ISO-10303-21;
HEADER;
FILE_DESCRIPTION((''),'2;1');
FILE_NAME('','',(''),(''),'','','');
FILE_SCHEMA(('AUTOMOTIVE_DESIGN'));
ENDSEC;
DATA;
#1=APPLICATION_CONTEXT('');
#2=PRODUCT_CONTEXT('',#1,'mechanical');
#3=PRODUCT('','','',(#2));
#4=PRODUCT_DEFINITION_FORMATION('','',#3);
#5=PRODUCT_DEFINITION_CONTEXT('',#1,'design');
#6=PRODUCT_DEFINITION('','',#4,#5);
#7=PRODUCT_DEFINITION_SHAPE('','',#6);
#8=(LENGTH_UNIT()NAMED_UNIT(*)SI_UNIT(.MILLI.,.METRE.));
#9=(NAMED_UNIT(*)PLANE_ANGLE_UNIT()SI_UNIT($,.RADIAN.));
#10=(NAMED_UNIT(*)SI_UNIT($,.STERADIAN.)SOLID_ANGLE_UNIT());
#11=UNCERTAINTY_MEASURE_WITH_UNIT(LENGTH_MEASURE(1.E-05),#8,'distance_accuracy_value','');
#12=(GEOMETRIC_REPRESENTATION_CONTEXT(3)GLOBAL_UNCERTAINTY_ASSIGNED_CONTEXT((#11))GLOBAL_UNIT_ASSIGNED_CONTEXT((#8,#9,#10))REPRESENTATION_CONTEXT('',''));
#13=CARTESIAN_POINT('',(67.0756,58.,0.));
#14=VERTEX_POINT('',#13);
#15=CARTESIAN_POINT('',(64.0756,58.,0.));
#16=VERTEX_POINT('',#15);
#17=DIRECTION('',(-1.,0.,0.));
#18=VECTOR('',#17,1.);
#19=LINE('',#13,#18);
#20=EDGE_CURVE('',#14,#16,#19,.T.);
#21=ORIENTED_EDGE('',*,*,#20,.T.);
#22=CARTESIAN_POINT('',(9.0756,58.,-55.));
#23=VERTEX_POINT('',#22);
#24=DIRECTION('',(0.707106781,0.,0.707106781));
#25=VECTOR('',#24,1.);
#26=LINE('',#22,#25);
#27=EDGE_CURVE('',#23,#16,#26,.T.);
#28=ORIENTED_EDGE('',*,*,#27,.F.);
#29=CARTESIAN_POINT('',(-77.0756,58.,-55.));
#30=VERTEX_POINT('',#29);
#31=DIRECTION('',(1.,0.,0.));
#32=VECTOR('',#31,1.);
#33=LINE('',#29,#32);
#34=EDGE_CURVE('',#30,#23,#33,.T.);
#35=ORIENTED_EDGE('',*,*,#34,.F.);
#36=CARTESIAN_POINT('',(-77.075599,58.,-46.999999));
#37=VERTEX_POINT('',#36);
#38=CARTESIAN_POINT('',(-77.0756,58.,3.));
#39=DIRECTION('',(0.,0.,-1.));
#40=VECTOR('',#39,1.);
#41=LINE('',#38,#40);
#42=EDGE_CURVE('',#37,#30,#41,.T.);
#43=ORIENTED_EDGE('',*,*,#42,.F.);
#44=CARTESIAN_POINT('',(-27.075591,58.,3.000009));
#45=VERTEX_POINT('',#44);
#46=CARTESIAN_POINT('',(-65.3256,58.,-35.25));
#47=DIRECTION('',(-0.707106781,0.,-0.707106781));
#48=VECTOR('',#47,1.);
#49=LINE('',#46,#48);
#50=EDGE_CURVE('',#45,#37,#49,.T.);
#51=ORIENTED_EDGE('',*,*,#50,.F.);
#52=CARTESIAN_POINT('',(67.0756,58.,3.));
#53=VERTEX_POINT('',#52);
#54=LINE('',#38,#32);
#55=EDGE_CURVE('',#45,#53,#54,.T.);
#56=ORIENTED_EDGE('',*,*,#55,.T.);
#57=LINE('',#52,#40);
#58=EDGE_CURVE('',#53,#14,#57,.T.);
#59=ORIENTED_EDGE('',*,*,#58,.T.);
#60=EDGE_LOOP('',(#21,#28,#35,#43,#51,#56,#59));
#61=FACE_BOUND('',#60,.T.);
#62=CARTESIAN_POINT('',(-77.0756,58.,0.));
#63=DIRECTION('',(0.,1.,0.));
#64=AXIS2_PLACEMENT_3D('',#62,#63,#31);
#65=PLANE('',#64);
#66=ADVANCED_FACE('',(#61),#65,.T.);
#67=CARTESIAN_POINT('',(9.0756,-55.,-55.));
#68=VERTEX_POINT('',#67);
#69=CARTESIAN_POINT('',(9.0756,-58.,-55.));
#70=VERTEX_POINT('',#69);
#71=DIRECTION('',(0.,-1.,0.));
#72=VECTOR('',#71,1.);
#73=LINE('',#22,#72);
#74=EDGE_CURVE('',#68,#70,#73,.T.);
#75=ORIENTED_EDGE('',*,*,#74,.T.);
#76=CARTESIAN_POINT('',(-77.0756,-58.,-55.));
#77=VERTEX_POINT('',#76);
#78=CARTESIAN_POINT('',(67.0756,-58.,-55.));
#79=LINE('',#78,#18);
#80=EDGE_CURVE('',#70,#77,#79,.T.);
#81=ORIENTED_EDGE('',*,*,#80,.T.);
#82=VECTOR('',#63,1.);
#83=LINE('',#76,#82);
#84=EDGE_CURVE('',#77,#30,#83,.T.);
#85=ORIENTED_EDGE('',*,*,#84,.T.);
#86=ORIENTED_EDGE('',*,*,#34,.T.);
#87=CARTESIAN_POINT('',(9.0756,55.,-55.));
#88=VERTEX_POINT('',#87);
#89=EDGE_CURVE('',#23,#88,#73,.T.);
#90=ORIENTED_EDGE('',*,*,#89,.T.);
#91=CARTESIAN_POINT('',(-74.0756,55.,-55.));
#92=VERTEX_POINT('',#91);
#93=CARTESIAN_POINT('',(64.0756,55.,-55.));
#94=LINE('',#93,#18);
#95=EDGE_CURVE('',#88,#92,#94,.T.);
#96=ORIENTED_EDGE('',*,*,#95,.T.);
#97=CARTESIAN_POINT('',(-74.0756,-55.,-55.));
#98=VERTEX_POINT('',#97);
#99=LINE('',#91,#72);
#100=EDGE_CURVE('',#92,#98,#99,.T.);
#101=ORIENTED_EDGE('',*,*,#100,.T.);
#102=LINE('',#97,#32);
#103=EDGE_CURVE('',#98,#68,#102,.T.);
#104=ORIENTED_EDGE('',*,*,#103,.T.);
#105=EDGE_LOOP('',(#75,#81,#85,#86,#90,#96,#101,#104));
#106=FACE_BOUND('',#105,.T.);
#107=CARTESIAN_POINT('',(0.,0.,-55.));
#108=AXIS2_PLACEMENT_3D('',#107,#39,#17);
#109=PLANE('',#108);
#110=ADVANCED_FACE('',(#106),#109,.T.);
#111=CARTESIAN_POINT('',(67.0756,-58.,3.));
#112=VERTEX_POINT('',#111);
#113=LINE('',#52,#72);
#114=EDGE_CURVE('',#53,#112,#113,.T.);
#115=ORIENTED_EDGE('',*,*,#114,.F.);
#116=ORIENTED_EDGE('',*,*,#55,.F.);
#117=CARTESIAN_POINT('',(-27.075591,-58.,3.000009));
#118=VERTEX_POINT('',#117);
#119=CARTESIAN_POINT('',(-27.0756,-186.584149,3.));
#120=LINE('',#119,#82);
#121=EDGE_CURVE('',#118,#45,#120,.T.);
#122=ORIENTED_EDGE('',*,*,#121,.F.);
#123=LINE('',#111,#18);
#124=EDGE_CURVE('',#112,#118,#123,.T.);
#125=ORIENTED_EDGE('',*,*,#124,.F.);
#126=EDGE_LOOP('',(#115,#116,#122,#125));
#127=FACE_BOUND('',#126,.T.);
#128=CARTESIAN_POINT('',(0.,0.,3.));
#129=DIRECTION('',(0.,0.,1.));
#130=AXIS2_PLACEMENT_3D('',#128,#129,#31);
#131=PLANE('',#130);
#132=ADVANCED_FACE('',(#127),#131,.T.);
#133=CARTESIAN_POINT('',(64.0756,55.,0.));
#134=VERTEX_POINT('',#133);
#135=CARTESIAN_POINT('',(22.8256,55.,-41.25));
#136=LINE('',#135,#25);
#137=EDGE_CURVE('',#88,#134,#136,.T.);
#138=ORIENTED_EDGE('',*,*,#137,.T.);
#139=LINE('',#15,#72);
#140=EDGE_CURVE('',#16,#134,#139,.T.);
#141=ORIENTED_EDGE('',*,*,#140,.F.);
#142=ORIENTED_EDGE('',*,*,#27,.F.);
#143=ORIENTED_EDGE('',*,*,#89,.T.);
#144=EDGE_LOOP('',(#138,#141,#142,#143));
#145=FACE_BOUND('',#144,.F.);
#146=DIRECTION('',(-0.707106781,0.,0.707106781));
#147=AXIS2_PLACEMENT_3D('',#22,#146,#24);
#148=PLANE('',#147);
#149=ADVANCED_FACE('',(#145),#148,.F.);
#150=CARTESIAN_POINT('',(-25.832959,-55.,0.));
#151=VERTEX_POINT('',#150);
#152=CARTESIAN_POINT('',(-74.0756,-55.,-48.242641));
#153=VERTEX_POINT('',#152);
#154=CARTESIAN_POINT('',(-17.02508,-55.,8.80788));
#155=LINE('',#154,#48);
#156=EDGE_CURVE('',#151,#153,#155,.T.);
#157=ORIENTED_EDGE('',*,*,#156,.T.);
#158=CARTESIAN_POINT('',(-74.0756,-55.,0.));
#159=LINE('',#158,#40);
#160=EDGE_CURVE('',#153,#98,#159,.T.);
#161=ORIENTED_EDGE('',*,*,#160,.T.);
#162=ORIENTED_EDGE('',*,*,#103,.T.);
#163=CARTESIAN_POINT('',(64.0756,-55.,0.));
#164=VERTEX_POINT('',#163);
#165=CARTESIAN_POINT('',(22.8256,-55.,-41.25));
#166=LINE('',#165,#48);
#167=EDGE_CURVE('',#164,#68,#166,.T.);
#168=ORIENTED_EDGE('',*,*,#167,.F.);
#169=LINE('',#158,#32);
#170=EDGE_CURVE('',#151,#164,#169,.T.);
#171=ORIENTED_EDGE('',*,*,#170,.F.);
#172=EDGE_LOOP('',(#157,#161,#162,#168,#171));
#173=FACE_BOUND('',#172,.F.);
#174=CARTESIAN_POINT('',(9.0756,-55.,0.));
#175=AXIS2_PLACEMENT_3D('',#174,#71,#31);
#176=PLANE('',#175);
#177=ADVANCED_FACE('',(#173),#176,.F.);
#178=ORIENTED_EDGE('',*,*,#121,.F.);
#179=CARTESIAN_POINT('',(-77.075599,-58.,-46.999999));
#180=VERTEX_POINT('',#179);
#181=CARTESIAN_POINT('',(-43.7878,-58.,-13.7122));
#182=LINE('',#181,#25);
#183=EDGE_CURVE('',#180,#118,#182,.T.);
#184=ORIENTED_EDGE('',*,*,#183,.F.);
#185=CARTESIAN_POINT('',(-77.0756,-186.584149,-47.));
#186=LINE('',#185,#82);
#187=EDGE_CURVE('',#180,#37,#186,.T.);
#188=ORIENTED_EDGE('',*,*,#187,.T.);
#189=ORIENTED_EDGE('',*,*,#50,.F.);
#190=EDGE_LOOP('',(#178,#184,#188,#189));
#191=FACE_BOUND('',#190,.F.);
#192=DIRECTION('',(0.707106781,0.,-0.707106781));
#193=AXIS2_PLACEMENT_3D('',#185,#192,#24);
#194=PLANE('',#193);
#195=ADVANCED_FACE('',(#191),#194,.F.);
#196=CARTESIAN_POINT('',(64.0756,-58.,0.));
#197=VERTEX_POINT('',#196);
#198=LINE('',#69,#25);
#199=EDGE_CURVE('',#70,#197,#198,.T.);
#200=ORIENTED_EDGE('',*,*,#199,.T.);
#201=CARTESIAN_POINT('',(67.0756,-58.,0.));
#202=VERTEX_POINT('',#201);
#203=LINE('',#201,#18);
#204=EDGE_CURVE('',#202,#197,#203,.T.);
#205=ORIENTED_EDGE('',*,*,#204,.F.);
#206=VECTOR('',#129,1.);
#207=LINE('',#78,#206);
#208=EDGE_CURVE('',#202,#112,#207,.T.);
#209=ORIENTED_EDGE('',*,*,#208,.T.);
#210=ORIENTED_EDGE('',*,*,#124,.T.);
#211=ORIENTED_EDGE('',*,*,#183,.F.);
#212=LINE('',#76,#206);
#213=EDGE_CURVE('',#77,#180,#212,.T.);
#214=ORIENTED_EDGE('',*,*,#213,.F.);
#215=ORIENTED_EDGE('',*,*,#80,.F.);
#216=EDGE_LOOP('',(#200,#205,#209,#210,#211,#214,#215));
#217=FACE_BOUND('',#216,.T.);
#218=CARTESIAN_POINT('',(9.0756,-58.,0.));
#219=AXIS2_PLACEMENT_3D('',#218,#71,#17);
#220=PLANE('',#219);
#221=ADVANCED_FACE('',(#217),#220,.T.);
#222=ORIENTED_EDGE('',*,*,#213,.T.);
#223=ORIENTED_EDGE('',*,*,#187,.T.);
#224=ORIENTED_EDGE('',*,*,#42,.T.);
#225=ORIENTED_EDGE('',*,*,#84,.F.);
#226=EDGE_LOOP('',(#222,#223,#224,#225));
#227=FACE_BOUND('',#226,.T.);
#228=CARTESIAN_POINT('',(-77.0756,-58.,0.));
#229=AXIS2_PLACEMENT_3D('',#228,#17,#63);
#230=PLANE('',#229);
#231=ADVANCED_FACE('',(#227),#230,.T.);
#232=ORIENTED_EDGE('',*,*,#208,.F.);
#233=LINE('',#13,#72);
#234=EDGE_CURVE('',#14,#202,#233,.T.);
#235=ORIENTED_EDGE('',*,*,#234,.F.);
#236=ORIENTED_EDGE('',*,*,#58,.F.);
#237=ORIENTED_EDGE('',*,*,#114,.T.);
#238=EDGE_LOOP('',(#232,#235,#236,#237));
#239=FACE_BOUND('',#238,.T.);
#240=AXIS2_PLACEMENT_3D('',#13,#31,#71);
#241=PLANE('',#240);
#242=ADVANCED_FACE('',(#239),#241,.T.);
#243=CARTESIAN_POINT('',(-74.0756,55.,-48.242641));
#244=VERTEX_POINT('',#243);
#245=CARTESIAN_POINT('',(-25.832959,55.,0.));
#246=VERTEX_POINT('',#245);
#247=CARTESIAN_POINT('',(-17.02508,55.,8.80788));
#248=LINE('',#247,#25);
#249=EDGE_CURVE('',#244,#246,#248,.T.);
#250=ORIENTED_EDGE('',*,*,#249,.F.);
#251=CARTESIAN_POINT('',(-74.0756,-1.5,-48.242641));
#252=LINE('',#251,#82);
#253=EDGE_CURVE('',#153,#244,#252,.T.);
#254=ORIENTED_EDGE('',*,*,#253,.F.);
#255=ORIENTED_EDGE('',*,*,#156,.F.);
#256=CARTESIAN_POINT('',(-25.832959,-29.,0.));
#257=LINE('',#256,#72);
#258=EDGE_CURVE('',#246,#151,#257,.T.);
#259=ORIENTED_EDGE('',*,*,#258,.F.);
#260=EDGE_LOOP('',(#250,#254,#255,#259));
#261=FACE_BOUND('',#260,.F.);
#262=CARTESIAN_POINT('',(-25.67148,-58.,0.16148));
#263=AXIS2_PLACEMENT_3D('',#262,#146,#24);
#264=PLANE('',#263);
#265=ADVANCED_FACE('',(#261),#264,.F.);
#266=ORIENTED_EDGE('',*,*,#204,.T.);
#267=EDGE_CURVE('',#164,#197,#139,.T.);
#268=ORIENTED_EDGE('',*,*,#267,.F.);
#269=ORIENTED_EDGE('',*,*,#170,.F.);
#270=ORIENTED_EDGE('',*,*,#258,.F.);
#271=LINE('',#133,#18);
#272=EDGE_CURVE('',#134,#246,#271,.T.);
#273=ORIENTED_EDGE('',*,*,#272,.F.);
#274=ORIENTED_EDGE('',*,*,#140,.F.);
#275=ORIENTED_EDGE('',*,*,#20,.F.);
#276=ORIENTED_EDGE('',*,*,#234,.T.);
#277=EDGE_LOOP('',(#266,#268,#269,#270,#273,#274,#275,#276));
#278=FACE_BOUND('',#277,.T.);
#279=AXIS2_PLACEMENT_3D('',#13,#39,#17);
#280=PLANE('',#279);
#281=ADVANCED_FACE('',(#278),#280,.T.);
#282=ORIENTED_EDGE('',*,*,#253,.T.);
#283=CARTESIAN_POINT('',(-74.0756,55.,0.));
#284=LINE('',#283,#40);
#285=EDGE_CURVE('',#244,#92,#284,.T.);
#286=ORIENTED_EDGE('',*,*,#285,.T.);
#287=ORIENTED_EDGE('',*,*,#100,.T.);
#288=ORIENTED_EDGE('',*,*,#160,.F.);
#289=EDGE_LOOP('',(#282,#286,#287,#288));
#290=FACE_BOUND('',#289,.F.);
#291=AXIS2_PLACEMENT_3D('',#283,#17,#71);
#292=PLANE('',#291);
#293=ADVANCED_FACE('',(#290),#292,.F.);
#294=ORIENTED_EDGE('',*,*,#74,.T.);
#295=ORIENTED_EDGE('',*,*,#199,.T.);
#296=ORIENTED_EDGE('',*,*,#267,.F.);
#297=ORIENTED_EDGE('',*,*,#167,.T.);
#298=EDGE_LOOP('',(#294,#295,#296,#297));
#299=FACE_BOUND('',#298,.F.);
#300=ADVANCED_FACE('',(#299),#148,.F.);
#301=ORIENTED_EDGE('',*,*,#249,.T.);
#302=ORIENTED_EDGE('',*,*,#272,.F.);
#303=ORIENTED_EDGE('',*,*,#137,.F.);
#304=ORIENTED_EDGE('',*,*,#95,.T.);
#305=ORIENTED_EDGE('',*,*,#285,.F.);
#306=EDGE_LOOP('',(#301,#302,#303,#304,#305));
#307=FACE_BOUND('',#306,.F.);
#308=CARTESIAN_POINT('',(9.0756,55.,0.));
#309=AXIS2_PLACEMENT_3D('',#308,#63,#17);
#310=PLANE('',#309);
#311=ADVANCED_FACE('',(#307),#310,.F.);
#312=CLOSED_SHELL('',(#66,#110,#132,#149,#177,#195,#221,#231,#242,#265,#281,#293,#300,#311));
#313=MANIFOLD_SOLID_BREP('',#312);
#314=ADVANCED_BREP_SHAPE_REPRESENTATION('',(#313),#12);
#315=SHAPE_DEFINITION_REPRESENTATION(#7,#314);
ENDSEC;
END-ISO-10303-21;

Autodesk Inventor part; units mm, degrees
ref_plane "YZ Plane" through (0, 0, 0) normal (1, 0, 0) x (0, 1, 0)
ref_plane "XZ Plane" through (0, 0, 0) normal (0, 1, 0) x (-1, 0, 0)
sketch "Эскиз1" plane through (0, 0, 0) normal (0, 0, 1) x (1, 0, 0)
  line L0 (-77.0756, -58) -> (-77.0756, 58) projected
  line L1 (-77.0756, 58) -> (67.0756, 58) projected
  line L2 (67.0756, 58) -> (67.0756, -58) projected
  line L3 (67.0756, -58) -> (-77.0756, -58) projected
  line L4 (-77.0756, -58) -> (-77.0756, 58) projected
  line L5 (9.0756, -58) -> (-77.0756, -58) projected
  line L6 (-77.0756, 58) -> (9.0756, 58) projected
  point P0 (0, 0)
extrude "Выдавливание1" add sketch "Эскиз1" along normal blind 3
sketch "Эскиз2" plane through (0, 0, 0) normal (0, 0, -1) x (-1, 0, 0)
  line L0 (-64.0756, 55) -> (74.0756, 55) projected
  line L1 (74.0756, 55) -> (74.0756, -55) projected
  line L2 (74.0756, -55) -> (-64.0756, -55) projected
  line L3 (-64.0756, -55) -> (-64.0756, 55) projected
  line L4 (77.0756, -58) -> (77.0756, 58) projected
  line L5 (77.0756, 58) -> (-67.0756, 58) projected
  line L6 (-67.0756, 58) -> (-67.0756, -58) projected
  line L7 (-67.0756, -58) -> (77.0756, -58) projected
  line L8 (-67.0756, -58) -> (-67.0756, 58) projected
  line L9 (-67.0756, 58) -> (77.0756, 58) projected
  line L10 (77.0756, 58) -> (77.0756, -58) projected
  line L11 (77.0756, -58) -> (-67.0756, -58) projected
  line L12 (-9.0756, 55) -> (74.0756, 55)
  line L13 (74.0756, 55) -> (74.0756, -55)
  line L14 (74.0756, -55) -> (-9.0756, -55)
  point P0 (0, 0)
  point P1 (68.51, 55)
  point P2 (68.51, -55)
ref_plane "РабПлоскость1" through (-68.51, -58, -55) normal (0, 0, 1) x (1, 0, 0)
extrude "Выдавливание2" add sketch "Эскиз2" along normal up to surface (55 mm away)
chamfer "Фаска1" distance 50 angle 45 1 edges at (-77.0756, 0, 3)
sketch "Эскиз4" plane through (-27.7928, -58, 2.2828) normal (-0.7071068, 0, 0.7071068) x (0.7071068, 0, 0.7071068)
  line L0 (-3.2284, 3) -> (-65.4538, 3) projected
  line L1 (-65.4538, 3) -> (-65.4538, 113) projected
  line L2 (-65.4538, 113) -> (-3.2284, 113) projected
  line L3 (-3.2284, 113) -> (-3.2284, 3) projected
  line L4 (-69.6964, 0) -> (1.0143, 0) projected
  line L5 (1.0143, 0) -> (1.0143, 116) projected
  line L6 (1.0143, 116) -> (-69.6964, 116) projected
  line L7 (-69.6964, 116) -> (-69.6964, 0) projected
  point P0 (18.0383, 58)
extrude "Выдавливание4" add sketch "Эскиз4" against normal blind 3 contours L0 L1 L2 L3 | L7 L6 L5 L4
sketch "Эскиз9" plane through (-28.51, -58, 3) normal (-0.7071068, 0, 0.7071068) x (0.7071068, 0, 0.7071068)
  line L0 (-10, 105.175) -> (-30, 105.175)
  line L1 (-30, 105.175) -> (-30, 91.875)
  line L2 (-30, 91.875) -> (-10, 91.875)
  line L3 (-10, 91.875) -> (-10, 105.175)
  circle A0 centre (-43.2843, 98.525) radius 5.25
  line L4 (-7, 80.55) -> (-33, 80.55)
  line L5 (-33, 80.55) -> (-33, 35.45)
  line L6 (-33, 35.45) -> (-7, 35.45)
  line L7 (-7, 35.45) -> (-7, 80.55)
  line L8 (-33.5, 34.95) -> (-33.5, 81.05)
  line L9 (-33.5, 81.05) -> (-6.5, 81.05)
  line L10 (-6.5, 81.05) -> (-6.5, 34.95)
  line L11 (-6.5, 34.95) -> (-33.5, 34.95)
  line L12 (-6.5, 70.5) -> (-33.5, 70.5)
  line L13 (-33.5, 70.5) -> (-33.5, 45.5)
  line L14 (-33.5, 45.5) -> (-6.5, 45.5)
  line L15 (-6.5, 45.5) -> (-6.5, 70.5)
  line L16 (-6.5, 70.5) -> (-6, 70.5)
  line L17 (-6, 70.5) -> (-6, 45.5)
  line L18 (-6, 45.5) -> (-6.5, 45.5)
  line L19 (-6.5, 45.5) -> (-6.5, 70.5)
  line L20 (-33.5, 70.5) -> (-34, 70.5)
  line L21 (-34, 70.5) -> (-34, 45.5)
  line L22 (-34, 45.5) -> (-33.5, 45.5)
  line L23 (-33.5, 45.5) -> (-33.5, 70.5)
  line L24 (0, 0) -> (0, 116) projected
  line L25 (0, 116) -> (0, 0)
  line L26 (0, 0) -> (0, 58)
  line L27 (0, 58) -> (-56.5685, 58)
  line L28 (-56.5685, 116) -> (-56.5685, 0) projected
  circle A1 centre (-15.7843, 17.475) radius 3.65
  circle A2 centre (-40.7843, 17.475) radius 3.65
  line L29 (-6.5, 34.95) -> (-6.5, 0)
  line L30 (-56.5685, 0) -> (0, 0) projected
  line L31 (-6.5, 17.475) -> (-56.5685, 17.475)
  line L32 (-56.5685, 17.475) -> (0, 17.475)
  line L33 (-15.7843, 17.475) -> (-40.7843, 17.475)
  circle A3 centre (-45.0343, 73.55) radius 4.15
  line L34 (-56.5685, 81.05) -> (-33.5, 81.05)
  line L35 (-33.5, 81.05) -> (-33.5, 34.95)
  line L36 (-33.5, 34.95) -> (-56.5685, 34.95)
  line L37 (-56.5685, 34.95) -> (-56.5685, 81.05)
  line L38 (-45.0343, 81.05) -> (-45.0343, 34.95)
  circle A4 centre (-45.0343, 73.55) radius 7.5
  line L39 (-6.5, 81.05) -> (-6.5, 116)
  line L40 (-6.5, 98.525) -> (-56.5685, 98.525)
  line L41 (-56.5685, 98.525) -> (0, 98.525)
  line L42 (-30, 98.525) -> (-56.5685, 98.525)
  line L43 (-20, 91.875) -> (-20, 0)
  point P0 (18.0383, 58)
  point P1 (-6.5, 58)
  point P2 (-6.5, 58)
  point P3 (-28.2843, 17.475)
  point P4 (-10, 98.525)
  point P5 (-20, 81.05)
  dimension "d31" = 20
  dimension "d32" = 13.3
  dimension "d33" = 10.5
  dimension "d34" = 26
  dimension "d35" = 45.1
  dimension "d36" = 0.5
  dimension "d37" = 25
  dimension "d38" = 0.5
  dimension "d39" = 0.5
  dimension "d40" = 7.3
  dimension "d41" = 7.3
  dimension "d45" = 25
  dimension "d46" = 8.3
  dimension "d47" = 15
  dimension "d48" = 10
sketch "Эскиз10" plane through (-28.51, -58, 3) normal (-0.7071068, 0, 0.7071068) x (0.7071068, 0, 0.7071068)
  line L0 (-30, 105.175) -> (-30, 91.875) projected
  line L1 (-10, 105.175) -> (-30, 105.175) projected
  line L2 (-30, 91.875) -> (-10, 91.875) projected
  line L3 (-10, 91.875) -> (-10, 105.175) projected
  circle A0 centre (-43.2843, 98.525) radius 5.25 projected
  circle A1 centre (-45.0343, 73.55) radius 4.15 projected
  circle A2 centre (-40.7843, 17.475) radius 3.65 projected
  circle A3 centre (-15.7843, 17.475) radius 3.65 projected
  line L4 (-6.5, 34.95) -> (-33.5, 34.95) projected
  line L5 (-33.5, 34.95) -> (-33.5, 81.05) projected
  line L6 (-34, 70.5) -> (-34, 45.5) projected
  line L7 (-33.5, 81.05) -> (-6.5, 81.05) projected
  line L8 (-6.5, 81.05) -> (-6.5, 34.95) projected
  line L9 (-6.5, 70.5) -> (-6, 70.5) projected
  line L10 (-6, 70.5) -> (-6, 45.5) projected
  line L11 (-6, 45.5) -> (-6.5, 45.5) projected
  line L12 (-33.5, 70.5) -> (-34, 70.5) projected
  line L13 (-34, 45.5) -> (-33.5, 45.5) projected
  line L14 (-6.15, 69.35) -> (-6.15, 60.2) projected
  point P0 (18.0383, 58)
extrude "Выдавливание9" [suppressed]
sketch "Эскиз11" plane through (-25.6715, -58, 0.1615) normal (0.7071068, 0, -0.7071068) x (-0.7071068, 0, -0.7071068)
  line L0 (0.2284, 3) -> (0.2284, 113) projected
  line L1 (40.7843, 17.475) -> (40.7843, 25.8116)
  line L2 (38.9594, 25.1915) -> (38.9372, 24.9384) projected
  arc A0 (38.8018, 24.8228) -> (38.9372, 24.9384) centre (38.8107, 24.9495) ccw projected
  arc A1 (38.8018, 24.8228) -> (37.7667, 24.8228) centre (38.2843, 17.475) ccw projected
  arc A2 (38.9594, 25.1915) -> (38.8419, 25.3292) centre (38.8329, 25.2026) ccw projected
  arc A3 (37.6313, 24.9384) -> (37.7667, 24.8228) centre (37.7578, 24.9495) ccw projected
  line L3 (37.6092, 25.1915) -> (37.6313, 24.9384) projected
  arc A4 (37.7267, 25.3292) -> (37.6092, 25.1915) centre (37.7357, 25.2026) ccw projected
  arc A5 (39.3003, 25.2832) -> (37.2683, 25.2832) centre (38.2843, 17.475) ccw projected
  arc A6 (40.1771, 26.0275) -> (39.4118, 25.1305) centre (40.2357, 25.2026) ccw
  line L4 (39.4118, 25.1305) -> (39.434, 24.8774)
  arc A7 (39.434, 24.8774) -> (40.3159, 24.1245) centre (40.2578, 24.9495) ccw
  arc A8 (41.2526, 24.1245) -> (40.3159, 24.1245) centre (40.7843, 17.475) ccw
  arc A9 (41.2526, 24.1245) -> (42.1346, 24.8774) centre (41.3107, 24.9495) ccw
  line L5 (42.1346, 24.8774) -> (42.1567, 25.1305)
  arc A10 (42.1567, 25.1305) -> (41.3914, 26.0275) centre (41.3329, 25.2026) ccw
  circle A11 centre (40.7843, 17.475) radius 8.574
  arc A12 (-9.3529, 50.5788) -> (-10.2349, 51.3317) centre (-10.1768, 50.5067) ccw
  arc A13 (-11.1715, 51.3317) -> (-10.2349, 51.3317) centre (-10.7032, 57.9812) ccw
  arc A14 (-11.1715, 51.3317) -> (-12.0535, 50.5788) centre (-11.2297, 50.5067) ccw
  arc A15 (-12.0756, 50.3258) -> (-11.3104, 49.4288) centre (-11.2518, 50.2537) ccw
  arc A16 (-10.0961, 49.4288) -> (-9.3308, 50.3258) centre (-10.1546, 50.2537) ccw
  line L6 (-9.3308, 50.3258) -> (-9.3529, 50.5788)
  line L7 (-12.0535, 50.5788) -> (-12.0756, 50.3258)
  circle A17 centre (15.7843, 17.475) radius 8.574
  arc A18 (14.4118, 9.8195) -> (15.1771, 8.9225) centre (15.2357, 9.7474) ccw
  arc A19 (15.3159, 10.8255) -> (14.434, 10.0726) centre (15.2578, 10.0005) ccw
  line L8 (14.434, 10.0726) -> (14.4118, 9.8195)
  arc A20 (15.3159, 10.8255) -> (16.2526, 10.8255) centre (15.7843, 17.475) ccw
  arc A21 (17.1346, 10.0726) -> (16.2526, 10.8255) centre (16.3107, 10.0005) ccw
  arc A22 (16.3914, 8.9225) -> (17.1567, 9.8195) centre (16.3329, 9.7474) ccw
  line L9 (17.1567, 9.8195) -> (17.1346, 10.0726)
  line L10 (0.2284, 113) -> (68.4538, 113) projected
  line L11 (68.4538, 3) -> (0.2284, 3) projected
  line L12 (68.4538, 113) -> (68.4538, 3) projected
  point P0 (-18.0383, 58)
  point P1 (40.1771, 26.0275)
  point P2 (15.1771, 8.9225)
  point P3 (16.3914, 8.9225)
  point P4 (15.1771, 8.9225)
  point P5 (16.3914, 8.9225)
  point P6 (17.1346, 10.0726)
extrude "Выдавливание10" [suppressed]
sketch "Эскиз14" plane through (-65.51, -55, -55) normal (1, 0, 0) x (0, 0, -1)
  line L0 (-55, 0) -> (-55, 110) projected
  line L1 (-24.0346, 70.55) -> (-16.7574, 70.55)
  line L2 (-16.7574, 110) -> (-16.7574, 0) projected
  line L3 (-18.0074, 65.55) -> (-15.5074, 65.55)
  line L4 (-15.5074, 65.55) -> (-15.5074, 75.55)
  line L5 (-15.5074, 75.55) -> (-18.0074, 75.55)
  line L6 (-18.0074, 75.55) -> (-18.0074, 65.55)
  line L7 (-18.0074, 65.55) -> (-15.5074, 75.55) construction
  line L8 (-15.5074, 65.55) -> (-18.0074, 75.55) construction
  line L9 (-55, 110) -> (-6.7574, 110) projected
  line L10 (-6.7574, 0) -> (-55, 0) projected
  line L11 (-6.7574, 110) -> (-6.7574, 0) projected
  point P0 (-55, 55)
  dimension "d63" = 2.5
  dimension "d64" = 10
extrude "Выдавливание13" [suppressed]
ref_plane "РабПлоскость2" through (-65.51, 15.55, -39.4926) normal (0, -1, 0) x (1, 0, 0)
sketch "Эскиз15" plane through (-77.0756, 58, -55) normal (0, 1, 0) x (1, 0, 0)
  line L0 (86.1512, 0) -> (141.1512, -55) projected
  line L1 (144.1512, -55) -> (141.1512, -55) projected
  line L2 (0, 0) -> (86.1512, 0) projected
  line L3 (50, -58) -> (0, -8) projected
  line L4 (144.1512, -58) -> (50, -58) projected
  line L5 (144.1512, 0) -> (144.1512, -58) projected
  line L6 (0, 0) -> (144.1512, 0) projected
  line L7 (0, 0) -> (0, -8) projected
  point P0 (77.0756, -55)
extrude "Выдавливание14" cut sketch "Эскиз15" against normal up to surface (116 mm away) contours L6 L5 L1 L0
properties part number "LPS_cap"
